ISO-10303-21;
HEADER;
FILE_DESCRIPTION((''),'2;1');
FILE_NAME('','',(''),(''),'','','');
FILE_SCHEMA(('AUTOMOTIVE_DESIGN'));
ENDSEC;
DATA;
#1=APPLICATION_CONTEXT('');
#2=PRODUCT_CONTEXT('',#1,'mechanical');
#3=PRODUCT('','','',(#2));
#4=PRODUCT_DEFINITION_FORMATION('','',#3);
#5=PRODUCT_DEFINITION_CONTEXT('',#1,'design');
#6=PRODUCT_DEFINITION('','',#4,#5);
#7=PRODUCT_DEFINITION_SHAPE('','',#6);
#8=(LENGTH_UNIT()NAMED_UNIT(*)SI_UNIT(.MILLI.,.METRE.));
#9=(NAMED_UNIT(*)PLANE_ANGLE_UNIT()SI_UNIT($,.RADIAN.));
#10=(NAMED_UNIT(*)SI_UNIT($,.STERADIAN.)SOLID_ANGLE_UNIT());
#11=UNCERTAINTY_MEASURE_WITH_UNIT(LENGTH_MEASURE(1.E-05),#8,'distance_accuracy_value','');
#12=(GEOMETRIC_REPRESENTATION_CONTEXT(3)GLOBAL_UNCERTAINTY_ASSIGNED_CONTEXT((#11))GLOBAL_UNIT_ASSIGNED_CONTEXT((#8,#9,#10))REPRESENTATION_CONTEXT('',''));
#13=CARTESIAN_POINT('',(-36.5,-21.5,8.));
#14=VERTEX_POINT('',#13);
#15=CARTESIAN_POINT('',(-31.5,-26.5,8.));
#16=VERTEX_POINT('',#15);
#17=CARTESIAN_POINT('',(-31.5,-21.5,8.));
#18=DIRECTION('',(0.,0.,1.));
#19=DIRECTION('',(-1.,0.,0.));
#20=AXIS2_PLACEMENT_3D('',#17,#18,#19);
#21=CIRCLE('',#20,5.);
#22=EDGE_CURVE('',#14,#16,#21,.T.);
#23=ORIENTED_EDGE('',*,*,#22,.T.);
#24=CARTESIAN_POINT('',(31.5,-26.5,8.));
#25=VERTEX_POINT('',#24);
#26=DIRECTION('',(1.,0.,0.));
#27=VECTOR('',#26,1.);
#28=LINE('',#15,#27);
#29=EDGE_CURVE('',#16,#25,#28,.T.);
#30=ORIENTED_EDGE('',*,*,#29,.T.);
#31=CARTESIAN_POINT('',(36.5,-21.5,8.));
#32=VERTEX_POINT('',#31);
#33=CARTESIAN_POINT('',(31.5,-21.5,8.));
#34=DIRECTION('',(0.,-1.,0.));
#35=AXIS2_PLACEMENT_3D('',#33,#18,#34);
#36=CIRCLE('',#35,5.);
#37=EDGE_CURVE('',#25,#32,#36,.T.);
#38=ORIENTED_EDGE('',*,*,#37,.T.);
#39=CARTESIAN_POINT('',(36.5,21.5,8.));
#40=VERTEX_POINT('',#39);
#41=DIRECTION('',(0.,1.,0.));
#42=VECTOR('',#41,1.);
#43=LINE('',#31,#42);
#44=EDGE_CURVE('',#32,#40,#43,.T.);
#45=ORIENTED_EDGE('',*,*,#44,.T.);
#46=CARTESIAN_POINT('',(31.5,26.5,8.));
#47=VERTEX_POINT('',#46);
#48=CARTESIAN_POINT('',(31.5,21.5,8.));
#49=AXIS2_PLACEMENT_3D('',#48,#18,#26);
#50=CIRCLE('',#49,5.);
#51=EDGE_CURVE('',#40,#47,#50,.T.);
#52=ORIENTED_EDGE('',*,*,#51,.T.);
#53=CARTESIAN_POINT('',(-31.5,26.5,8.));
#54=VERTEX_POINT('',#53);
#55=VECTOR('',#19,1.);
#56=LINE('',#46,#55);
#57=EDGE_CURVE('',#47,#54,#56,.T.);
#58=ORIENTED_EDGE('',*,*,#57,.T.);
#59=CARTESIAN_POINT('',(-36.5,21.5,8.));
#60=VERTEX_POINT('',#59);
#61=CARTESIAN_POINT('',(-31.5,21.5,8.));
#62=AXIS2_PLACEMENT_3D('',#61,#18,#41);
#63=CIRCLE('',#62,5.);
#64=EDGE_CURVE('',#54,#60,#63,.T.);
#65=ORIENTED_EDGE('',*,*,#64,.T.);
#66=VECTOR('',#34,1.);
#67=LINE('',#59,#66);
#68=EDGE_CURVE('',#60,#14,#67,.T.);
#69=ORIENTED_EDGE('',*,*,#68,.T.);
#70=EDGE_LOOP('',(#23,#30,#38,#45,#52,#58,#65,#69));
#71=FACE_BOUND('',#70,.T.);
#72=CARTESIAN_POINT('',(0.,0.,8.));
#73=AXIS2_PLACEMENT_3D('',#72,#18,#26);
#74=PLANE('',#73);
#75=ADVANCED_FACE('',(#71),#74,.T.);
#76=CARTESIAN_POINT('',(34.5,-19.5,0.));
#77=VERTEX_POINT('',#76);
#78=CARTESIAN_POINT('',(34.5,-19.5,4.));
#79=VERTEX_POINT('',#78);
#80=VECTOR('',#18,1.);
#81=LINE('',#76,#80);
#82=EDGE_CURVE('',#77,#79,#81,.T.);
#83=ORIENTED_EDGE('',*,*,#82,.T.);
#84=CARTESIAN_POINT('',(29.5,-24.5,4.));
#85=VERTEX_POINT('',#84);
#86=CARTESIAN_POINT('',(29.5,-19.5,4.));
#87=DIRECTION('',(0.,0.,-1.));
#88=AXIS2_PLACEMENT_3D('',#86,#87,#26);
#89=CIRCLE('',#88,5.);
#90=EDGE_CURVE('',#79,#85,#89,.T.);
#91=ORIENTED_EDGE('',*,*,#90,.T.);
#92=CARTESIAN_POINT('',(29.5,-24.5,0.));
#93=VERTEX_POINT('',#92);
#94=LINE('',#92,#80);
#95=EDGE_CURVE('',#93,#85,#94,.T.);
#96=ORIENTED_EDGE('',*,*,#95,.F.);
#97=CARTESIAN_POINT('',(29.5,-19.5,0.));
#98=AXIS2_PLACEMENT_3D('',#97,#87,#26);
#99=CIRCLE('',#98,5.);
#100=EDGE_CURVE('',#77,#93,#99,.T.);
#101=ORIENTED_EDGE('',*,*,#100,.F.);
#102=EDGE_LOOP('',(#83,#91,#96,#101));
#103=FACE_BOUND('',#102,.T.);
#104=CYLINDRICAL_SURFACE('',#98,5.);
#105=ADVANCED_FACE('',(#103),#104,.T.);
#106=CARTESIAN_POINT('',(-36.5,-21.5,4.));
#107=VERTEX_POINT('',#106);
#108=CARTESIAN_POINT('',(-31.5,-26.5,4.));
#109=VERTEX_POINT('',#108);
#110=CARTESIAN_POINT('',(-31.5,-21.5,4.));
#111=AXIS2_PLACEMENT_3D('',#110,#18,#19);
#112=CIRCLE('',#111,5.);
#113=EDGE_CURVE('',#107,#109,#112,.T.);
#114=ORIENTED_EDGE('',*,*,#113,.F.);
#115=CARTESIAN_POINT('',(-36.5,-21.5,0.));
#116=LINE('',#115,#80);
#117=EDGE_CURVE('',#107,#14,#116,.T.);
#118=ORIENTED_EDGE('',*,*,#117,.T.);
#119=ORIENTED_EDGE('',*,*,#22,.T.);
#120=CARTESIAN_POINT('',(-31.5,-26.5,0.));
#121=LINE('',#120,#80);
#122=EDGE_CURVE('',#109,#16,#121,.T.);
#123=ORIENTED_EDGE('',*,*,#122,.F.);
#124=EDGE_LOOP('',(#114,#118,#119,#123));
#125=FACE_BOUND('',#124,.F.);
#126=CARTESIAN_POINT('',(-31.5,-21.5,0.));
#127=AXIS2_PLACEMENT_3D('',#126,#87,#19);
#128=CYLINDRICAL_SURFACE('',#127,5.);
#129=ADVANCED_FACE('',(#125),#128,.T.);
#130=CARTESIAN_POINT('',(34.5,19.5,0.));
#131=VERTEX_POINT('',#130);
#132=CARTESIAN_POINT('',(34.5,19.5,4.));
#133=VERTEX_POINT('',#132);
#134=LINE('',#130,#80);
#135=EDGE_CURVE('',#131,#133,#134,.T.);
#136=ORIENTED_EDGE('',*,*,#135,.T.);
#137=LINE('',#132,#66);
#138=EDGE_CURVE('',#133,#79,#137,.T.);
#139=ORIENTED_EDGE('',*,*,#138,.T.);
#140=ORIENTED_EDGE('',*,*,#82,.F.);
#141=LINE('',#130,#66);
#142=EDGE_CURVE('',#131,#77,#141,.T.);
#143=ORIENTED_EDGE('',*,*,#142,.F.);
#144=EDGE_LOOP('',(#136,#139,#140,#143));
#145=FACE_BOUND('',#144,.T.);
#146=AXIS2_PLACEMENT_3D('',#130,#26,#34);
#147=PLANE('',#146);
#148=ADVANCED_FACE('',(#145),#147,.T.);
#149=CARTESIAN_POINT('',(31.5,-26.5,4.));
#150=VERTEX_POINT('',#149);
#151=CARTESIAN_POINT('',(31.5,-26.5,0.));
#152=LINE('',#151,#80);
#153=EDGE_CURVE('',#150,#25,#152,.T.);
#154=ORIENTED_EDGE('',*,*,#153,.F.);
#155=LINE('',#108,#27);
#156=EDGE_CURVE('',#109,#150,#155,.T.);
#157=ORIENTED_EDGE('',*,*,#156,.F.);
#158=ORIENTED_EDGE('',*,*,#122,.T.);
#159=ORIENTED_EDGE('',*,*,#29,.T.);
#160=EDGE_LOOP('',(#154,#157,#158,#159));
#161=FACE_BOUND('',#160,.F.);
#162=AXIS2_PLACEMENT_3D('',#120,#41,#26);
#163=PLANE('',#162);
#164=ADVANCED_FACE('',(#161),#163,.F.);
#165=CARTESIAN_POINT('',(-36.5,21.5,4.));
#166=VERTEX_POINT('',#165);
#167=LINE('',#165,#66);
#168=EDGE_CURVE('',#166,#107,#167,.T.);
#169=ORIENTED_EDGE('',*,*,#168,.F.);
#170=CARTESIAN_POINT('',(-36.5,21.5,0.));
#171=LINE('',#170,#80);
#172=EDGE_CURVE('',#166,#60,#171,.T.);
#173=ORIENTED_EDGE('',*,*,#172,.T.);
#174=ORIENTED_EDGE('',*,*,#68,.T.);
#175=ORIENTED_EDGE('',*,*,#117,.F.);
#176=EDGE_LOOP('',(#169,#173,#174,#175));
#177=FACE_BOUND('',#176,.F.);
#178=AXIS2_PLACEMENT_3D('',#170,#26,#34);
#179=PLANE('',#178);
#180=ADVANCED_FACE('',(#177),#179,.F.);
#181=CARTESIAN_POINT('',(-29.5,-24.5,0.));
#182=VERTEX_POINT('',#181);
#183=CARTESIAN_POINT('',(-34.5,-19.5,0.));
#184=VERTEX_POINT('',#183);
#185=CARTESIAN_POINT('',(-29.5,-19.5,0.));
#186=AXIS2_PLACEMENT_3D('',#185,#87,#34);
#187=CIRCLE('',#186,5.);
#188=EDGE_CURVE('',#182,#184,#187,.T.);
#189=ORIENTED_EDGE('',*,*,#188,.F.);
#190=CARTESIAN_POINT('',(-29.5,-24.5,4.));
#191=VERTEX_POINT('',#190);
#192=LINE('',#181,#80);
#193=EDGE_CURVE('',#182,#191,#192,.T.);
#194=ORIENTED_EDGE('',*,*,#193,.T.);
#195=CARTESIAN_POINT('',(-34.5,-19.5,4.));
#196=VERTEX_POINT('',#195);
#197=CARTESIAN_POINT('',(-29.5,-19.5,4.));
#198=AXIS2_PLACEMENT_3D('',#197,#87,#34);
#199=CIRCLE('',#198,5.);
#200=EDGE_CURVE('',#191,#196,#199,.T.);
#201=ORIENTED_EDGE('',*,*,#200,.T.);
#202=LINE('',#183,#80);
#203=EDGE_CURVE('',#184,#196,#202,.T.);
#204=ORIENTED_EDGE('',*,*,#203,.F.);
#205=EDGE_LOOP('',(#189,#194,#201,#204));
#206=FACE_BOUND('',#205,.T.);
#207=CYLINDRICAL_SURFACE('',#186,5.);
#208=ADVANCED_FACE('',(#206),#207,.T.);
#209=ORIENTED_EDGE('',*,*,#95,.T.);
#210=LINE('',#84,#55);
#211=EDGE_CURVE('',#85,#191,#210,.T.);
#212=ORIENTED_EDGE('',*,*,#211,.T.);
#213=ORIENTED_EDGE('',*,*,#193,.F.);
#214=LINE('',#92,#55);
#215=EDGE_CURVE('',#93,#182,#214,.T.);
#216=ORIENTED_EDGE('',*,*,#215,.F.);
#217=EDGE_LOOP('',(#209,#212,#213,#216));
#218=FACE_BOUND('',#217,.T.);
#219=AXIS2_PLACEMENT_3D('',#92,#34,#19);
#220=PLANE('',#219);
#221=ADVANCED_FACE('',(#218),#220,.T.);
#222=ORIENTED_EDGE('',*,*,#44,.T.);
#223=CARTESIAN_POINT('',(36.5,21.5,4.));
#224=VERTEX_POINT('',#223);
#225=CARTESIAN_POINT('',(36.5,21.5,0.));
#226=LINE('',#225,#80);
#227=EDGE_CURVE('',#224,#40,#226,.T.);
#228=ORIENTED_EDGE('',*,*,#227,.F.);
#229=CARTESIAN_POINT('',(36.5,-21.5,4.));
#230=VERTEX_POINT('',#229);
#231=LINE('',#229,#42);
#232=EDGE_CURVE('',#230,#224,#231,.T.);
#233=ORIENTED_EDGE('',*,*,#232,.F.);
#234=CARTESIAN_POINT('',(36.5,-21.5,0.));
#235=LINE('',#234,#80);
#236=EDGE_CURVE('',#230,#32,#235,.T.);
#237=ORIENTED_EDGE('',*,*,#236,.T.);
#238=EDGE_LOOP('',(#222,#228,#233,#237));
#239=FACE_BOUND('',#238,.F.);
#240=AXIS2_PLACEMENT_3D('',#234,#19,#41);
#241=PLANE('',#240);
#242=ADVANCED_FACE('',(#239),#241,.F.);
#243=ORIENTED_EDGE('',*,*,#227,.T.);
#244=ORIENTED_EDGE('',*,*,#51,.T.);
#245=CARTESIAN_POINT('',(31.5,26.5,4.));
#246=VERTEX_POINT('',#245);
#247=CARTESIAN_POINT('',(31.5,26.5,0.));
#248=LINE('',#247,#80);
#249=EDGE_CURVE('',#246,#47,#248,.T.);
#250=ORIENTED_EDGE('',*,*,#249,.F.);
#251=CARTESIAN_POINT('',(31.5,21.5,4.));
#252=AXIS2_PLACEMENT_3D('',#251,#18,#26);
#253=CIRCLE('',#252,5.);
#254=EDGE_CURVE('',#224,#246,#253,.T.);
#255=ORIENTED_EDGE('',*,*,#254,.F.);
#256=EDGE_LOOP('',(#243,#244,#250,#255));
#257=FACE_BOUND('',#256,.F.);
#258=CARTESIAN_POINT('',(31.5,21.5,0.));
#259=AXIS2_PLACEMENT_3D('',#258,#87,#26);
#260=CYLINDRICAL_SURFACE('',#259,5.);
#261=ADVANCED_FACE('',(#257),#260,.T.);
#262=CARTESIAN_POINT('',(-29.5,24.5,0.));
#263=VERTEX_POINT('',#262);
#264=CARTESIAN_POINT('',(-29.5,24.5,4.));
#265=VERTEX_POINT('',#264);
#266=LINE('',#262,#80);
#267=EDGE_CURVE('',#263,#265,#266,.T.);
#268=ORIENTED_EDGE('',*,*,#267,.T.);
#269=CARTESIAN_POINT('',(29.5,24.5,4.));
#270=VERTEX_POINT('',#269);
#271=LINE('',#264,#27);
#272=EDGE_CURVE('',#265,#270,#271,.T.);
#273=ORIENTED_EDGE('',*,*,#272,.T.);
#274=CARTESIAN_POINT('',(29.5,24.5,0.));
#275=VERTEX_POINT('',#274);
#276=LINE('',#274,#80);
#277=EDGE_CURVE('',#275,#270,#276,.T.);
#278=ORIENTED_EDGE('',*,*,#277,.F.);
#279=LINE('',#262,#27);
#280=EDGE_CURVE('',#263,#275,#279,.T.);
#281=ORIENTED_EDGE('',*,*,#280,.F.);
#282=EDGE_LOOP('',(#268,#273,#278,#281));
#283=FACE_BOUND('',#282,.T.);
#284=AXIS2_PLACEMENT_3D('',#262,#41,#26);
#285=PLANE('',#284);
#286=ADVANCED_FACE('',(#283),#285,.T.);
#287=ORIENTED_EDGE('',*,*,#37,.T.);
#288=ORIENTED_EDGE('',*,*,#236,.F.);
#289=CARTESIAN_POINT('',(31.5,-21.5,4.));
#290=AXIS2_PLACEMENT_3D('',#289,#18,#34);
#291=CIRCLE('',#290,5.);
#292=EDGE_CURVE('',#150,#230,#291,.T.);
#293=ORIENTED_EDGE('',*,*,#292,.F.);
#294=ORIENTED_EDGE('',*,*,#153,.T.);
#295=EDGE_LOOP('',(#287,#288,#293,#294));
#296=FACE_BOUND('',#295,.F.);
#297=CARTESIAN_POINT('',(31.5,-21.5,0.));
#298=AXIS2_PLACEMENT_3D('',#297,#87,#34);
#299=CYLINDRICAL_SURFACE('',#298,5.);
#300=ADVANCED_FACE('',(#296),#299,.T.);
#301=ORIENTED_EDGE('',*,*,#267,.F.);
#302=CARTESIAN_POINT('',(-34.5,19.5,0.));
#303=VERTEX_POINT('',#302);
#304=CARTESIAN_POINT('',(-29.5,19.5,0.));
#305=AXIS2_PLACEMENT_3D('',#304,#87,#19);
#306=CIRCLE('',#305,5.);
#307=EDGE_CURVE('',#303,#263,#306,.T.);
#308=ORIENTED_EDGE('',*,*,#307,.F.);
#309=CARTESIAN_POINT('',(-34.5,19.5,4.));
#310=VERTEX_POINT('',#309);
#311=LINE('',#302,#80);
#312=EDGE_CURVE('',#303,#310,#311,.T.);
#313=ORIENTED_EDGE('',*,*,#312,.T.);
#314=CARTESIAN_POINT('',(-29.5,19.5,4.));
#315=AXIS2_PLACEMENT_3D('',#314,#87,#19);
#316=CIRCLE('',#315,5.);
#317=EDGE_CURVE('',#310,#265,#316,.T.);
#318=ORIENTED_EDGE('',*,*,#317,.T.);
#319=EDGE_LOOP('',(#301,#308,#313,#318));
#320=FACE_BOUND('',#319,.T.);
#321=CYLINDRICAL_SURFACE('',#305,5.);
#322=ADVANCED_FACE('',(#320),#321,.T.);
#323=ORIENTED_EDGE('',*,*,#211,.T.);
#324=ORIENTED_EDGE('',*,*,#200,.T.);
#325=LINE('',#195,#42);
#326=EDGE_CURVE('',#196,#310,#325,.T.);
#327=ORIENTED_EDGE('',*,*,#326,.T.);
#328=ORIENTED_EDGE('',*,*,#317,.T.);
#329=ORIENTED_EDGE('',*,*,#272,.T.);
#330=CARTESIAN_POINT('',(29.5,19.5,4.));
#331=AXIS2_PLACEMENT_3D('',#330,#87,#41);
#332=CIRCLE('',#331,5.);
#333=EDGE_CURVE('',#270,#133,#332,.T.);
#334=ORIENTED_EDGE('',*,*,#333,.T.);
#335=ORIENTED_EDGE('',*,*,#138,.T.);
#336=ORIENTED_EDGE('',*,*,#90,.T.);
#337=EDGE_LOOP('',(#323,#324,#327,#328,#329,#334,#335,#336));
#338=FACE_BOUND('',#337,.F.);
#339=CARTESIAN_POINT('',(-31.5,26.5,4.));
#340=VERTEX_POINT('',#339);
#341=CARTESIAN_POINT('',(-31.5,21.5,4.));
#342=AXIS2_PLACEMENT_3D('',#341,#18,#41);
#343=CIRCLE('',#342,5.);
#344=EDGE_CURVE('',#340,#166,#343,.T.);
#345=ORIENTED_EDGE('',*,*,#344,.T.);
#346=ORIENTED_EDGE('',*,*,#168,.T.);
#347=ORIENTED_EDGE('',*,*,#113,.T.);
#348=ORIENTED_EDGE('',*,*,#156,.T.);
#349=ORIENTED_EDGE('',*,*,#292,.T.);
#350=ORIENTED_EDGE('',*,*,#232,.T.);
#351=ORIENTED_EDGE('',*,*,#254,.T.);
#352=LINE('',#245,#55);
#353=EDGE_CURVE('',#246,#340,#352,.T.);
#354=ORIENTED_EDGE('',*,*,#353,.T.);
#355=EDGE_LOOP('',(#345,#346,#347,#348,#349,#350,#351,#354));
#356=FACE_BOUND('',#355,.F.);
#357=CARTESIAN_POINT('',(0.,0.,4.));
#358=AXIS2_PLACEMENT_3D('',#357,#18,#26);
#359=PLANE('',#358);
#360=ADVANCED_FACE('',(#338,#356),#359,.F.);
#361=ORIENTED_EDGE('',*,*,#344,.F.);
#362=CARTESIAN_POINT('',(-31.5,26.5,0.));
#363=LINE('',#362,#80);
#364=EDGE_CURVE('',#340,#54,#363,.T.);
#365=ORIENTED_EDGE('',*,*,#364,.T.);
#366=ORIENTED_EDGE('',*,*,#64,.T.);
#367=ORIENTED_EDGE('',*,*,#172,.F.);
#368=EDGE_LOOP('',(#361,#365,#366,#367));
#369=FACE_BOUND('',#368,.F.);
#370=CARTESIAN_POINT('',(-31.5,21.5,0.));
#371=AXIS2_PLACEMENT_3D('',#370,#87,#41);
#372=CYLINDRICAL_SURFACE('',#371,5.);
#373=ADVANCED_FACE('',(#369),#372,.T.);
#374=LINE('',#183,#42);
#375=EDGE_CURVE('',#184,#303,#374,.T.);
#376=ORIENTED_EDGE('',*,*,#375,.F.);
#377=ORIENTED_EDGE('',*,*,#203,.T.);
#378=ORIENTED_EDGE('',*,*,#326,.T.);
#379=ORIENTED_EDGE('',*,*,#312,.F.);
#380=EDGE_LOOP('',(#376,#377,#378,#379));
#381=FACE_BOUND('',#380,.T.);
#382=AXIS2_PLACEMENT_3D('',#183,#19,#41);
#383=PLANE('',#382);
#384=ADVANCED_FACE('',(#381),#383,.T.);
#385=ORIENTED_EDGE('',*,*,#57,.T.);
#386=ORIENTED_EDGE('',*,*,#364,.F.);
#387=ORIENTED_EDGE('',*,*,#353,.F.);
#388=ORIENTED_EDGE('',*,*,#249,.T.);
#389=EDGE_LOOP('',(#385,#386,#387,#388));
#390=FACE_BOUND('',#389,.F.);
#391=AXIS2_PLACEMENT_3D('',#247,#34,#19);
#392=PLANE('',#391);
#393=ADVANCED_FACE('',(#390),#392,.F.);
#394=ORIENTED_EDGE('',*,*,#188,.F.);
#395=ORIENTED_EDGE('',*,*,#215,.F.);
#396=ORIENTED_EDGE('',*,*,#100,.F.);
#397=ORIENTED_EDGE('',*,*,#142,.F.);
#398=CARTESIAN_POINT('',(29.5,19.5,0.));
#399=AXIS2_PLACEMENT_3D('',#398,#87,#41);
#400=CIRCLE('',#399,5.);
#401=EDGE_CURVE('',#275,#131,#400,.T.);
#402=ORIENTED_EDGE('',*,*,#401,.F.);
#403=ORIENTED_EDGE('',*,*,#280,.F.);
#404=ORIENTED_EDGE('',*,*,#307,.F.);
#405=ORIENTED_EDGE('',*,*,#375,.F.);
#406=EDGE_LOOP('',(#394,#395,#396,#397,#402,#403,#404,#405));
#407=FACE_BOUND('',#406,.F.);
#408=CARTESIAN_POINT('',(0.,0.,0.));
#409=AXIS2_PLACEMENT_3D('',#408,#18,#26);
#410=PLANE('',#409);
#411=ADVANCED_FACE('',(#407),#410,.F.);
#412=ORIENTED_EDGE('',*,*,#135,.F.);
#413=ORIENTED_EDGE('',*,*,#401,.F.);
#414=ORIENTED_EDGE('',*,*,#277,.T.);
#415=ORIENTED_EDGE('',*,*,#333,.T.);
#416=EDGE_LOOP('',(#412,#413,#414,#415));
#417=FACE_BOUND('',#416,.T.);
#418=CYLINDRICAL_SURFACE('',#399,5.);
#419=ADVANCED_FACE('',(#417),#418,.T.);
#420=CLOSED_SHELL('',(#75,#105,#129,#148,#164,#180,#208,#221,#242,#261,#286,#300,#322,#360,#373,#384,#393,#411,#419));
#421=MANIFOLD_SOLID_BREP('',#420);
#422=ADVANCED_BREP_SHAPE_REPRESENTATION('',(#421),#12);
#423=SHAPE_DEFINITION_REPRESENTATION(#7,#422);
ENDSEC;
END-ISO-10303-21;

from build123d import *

# Parameters (mm, degrees)
F1_DEPTH = 8
F2_DEPTH = 8
F3_DEPTH = 4


with BuildPart() as f1:
    # F0 (on Top) → F1 (new body)
    with BuildSketch(Plane.XY):
        with BuildLine():
            Line((31.5, 26.5), (-31.5, 26.5))
            ThreePointArc((-31.5, 26.5), (-35.0355339059, 25.0355339059), (-36.5, 21.5))
            Line((-36.5, 21.5), (-36.5, -21.5))
            ThreePointArc((-36.5, -21.5), (-35.0355339059, -25.0355339059), (-31.5, -26.5))
            Line((-31.5, -26.5), (31.5, -26.5))
            ThreePointArc((31.5, -26.5), (35.0355339059, -25.0355339059), (36.5, -21.5))
            Line((36.5, -21.5), (36.5, 21.5))
            ThreePointArc((36.5, 21.5), (35.0355339059, 25.0355339059), (31.5, 26.5))
        make_face()
        with BuildLine():
            ThreePointArc((-34.5, 19.5), (-33.0355339059, 23.0355339059), (-29.5, 24.5))
            Line((-29.5, 24.5), (29.5, 24.5))
            ThreePointArc((29.5, 24.5), (33.0355339059, 23.0355339059), (34.5, 19.5))
            Line((34.5, 19.5), (34.5, -19.5))
            ThreePointArc((34.5, -19.5), (33.0355339059, -23.0355339059), (29.5, -24.5))
            Line((29.5, -24.5), (-29.5, -24.5))
            ThreePointArc((-29.5, -24.5), (-33.0355339059, -23.0355339059), (-34.5, -19.5))
            Line((-34.5, -19.5), (-34.5, 19.5))
        make_face(mode=Mode.SUBTRACT)
        with BuildLine():
            Line((29.5, 24.5), (-29.5, 24.5))
            ThreePointArc((-29.5, 24.5), (-33.0355339059, 23.0355339059), (-34.5, 19.5))
            Line((-34.5, 19.5), (-34.5, -19.5))
            ThreePointArc((-34.5, -19.5), (-33.0355339059, -23.0355339059), (-29.5, -24.5))
            Line((-29.5, -24.5), (29.5, -24.5))
            ThreePointArc((29.5, -24.5), (33.0355339059, -23.0355339059), (34.5, -19.5))
            Line((34.5, -19.5), (34.5, 19.5))
            ThreePointArc((34.5, 19.5), (33.0355339059, 23.0355339059), (29.5, 24.5))
        make_face()
    extrude(amount=F1_DEPTH)

    # F0 (on Top) → F2 (join)
    with BuildSketch(Plane.XY):
        with BuildLine():
            Line((31.5, 26.5), (-31.5, 26.5))
            ThreePointArc((-31.5, 26.5), (-35.0355339059, 25.0355339059), (-36.5, 21.5))
            Line((-36.5, 21.5), (-36.5, -21.5))
            ThreePointArc((-36.5, -21.5), (-35.0355339059, -25.0355339059), (-31.5, -26.5))
            Line((-31.5, -26.5), (31.5, -26.5))
            ThreePointArc((31.5, -26.5), (35.0355339059, -25.0355339059), (36.5, -21.5))
            Line((36.5, -21.5), (36.5, 21.5))
            ThreePointArc((36.5, 21.5), (35.0355339059, 25.0355339059), (31.5, 26.5))
        make_face()
        with BuildLine():
            ThreePointArc((-34.5, 19.5), (-33.0355339059, 23.0355339059), (-29.5, 24.5))
            Line((-29.5, 24.5), (29.5, 24.5))
            ThreePointArc((29.5, 24.5), (33.0355339059, 23.0355339059), (34.5, 19.5))
            Line((34.5, 19.5), (34.5, -19.5))
            ThreePointArc((34.5, -19.5), (33.0355339059, -23.0355339059), (29.5, -24.5))
            Line((29.5, -24.5), (-29.5, -24.5))
            ThreePointArc((-29.5, -24.5), (-33.0355339059, -23.0355339059), (-34.5, -19.5))
            Line((-34.5, -19.5), (-34.5, 19.5))
        make_face(mode=Mode.SUBTRACT)
    extrude(amount=F2_DEPTH)

    # F0 (on Top) → F3 (cut)
    with BuildSketch(Plane.XY):
        with BuildLine():
            Line((31.5, 26.5), (-31.5, 26.5))
            ThreePointArc((-31.5, 26.5), (-35.0355339059, 25.0355339059), (-36.5, 21.5))
            Line((-36.5, 21.5), (-36.5, -21.5))
            ThreePointArc((-36.5, -21.5), (-35.0355339059, -25.0355339059), (-31.5, -26.5))
            Line((-31.5, -26.5), (31.5, -26.5))
            ThreePointArc((31.5, -26.5), (35.0355339059, -25.0355339059), (36.5, -21.5))
            Line((36.5, -21.5), (36.5, 21.5))
            ThreePointArc((36.5, 21.5), (35.0355339059, 25.0355339059), (31.5, 26.5))
        make_face()
        with BuildLine():
            ThreePointArc((-34.5, 19.5), (-33.0355339059, 23.0355339059), (-29.5, 24.5))
            Line((-29.5, 24.5), (29.5, 24.5))
            ThreePointArc((29.5, 24.5), (33.0355339059, 23.0355339059), (34.5, 19.5))
            Line((34.5, 19.5), (34.5, -19.5))
            ThreePointArc((34.5, -19.5), (33.0355339059, -23.0355339059), (29.5, -24.5))
            Line((29.5, -24.5), (-29.5, -24.5))
            ThreePointArc((-29.5, -24.5), (-33.0355339059, -23.0355339059), (-34.5, -19.5))
            Line((-34.5, -19.5), (-34.5, 19.5))
        make_face(mode=Mode.SUBTRACT)
    extrude(amount=F3_DEPTH, mode=Mode.SUBTRACT)


solid = f1.part
